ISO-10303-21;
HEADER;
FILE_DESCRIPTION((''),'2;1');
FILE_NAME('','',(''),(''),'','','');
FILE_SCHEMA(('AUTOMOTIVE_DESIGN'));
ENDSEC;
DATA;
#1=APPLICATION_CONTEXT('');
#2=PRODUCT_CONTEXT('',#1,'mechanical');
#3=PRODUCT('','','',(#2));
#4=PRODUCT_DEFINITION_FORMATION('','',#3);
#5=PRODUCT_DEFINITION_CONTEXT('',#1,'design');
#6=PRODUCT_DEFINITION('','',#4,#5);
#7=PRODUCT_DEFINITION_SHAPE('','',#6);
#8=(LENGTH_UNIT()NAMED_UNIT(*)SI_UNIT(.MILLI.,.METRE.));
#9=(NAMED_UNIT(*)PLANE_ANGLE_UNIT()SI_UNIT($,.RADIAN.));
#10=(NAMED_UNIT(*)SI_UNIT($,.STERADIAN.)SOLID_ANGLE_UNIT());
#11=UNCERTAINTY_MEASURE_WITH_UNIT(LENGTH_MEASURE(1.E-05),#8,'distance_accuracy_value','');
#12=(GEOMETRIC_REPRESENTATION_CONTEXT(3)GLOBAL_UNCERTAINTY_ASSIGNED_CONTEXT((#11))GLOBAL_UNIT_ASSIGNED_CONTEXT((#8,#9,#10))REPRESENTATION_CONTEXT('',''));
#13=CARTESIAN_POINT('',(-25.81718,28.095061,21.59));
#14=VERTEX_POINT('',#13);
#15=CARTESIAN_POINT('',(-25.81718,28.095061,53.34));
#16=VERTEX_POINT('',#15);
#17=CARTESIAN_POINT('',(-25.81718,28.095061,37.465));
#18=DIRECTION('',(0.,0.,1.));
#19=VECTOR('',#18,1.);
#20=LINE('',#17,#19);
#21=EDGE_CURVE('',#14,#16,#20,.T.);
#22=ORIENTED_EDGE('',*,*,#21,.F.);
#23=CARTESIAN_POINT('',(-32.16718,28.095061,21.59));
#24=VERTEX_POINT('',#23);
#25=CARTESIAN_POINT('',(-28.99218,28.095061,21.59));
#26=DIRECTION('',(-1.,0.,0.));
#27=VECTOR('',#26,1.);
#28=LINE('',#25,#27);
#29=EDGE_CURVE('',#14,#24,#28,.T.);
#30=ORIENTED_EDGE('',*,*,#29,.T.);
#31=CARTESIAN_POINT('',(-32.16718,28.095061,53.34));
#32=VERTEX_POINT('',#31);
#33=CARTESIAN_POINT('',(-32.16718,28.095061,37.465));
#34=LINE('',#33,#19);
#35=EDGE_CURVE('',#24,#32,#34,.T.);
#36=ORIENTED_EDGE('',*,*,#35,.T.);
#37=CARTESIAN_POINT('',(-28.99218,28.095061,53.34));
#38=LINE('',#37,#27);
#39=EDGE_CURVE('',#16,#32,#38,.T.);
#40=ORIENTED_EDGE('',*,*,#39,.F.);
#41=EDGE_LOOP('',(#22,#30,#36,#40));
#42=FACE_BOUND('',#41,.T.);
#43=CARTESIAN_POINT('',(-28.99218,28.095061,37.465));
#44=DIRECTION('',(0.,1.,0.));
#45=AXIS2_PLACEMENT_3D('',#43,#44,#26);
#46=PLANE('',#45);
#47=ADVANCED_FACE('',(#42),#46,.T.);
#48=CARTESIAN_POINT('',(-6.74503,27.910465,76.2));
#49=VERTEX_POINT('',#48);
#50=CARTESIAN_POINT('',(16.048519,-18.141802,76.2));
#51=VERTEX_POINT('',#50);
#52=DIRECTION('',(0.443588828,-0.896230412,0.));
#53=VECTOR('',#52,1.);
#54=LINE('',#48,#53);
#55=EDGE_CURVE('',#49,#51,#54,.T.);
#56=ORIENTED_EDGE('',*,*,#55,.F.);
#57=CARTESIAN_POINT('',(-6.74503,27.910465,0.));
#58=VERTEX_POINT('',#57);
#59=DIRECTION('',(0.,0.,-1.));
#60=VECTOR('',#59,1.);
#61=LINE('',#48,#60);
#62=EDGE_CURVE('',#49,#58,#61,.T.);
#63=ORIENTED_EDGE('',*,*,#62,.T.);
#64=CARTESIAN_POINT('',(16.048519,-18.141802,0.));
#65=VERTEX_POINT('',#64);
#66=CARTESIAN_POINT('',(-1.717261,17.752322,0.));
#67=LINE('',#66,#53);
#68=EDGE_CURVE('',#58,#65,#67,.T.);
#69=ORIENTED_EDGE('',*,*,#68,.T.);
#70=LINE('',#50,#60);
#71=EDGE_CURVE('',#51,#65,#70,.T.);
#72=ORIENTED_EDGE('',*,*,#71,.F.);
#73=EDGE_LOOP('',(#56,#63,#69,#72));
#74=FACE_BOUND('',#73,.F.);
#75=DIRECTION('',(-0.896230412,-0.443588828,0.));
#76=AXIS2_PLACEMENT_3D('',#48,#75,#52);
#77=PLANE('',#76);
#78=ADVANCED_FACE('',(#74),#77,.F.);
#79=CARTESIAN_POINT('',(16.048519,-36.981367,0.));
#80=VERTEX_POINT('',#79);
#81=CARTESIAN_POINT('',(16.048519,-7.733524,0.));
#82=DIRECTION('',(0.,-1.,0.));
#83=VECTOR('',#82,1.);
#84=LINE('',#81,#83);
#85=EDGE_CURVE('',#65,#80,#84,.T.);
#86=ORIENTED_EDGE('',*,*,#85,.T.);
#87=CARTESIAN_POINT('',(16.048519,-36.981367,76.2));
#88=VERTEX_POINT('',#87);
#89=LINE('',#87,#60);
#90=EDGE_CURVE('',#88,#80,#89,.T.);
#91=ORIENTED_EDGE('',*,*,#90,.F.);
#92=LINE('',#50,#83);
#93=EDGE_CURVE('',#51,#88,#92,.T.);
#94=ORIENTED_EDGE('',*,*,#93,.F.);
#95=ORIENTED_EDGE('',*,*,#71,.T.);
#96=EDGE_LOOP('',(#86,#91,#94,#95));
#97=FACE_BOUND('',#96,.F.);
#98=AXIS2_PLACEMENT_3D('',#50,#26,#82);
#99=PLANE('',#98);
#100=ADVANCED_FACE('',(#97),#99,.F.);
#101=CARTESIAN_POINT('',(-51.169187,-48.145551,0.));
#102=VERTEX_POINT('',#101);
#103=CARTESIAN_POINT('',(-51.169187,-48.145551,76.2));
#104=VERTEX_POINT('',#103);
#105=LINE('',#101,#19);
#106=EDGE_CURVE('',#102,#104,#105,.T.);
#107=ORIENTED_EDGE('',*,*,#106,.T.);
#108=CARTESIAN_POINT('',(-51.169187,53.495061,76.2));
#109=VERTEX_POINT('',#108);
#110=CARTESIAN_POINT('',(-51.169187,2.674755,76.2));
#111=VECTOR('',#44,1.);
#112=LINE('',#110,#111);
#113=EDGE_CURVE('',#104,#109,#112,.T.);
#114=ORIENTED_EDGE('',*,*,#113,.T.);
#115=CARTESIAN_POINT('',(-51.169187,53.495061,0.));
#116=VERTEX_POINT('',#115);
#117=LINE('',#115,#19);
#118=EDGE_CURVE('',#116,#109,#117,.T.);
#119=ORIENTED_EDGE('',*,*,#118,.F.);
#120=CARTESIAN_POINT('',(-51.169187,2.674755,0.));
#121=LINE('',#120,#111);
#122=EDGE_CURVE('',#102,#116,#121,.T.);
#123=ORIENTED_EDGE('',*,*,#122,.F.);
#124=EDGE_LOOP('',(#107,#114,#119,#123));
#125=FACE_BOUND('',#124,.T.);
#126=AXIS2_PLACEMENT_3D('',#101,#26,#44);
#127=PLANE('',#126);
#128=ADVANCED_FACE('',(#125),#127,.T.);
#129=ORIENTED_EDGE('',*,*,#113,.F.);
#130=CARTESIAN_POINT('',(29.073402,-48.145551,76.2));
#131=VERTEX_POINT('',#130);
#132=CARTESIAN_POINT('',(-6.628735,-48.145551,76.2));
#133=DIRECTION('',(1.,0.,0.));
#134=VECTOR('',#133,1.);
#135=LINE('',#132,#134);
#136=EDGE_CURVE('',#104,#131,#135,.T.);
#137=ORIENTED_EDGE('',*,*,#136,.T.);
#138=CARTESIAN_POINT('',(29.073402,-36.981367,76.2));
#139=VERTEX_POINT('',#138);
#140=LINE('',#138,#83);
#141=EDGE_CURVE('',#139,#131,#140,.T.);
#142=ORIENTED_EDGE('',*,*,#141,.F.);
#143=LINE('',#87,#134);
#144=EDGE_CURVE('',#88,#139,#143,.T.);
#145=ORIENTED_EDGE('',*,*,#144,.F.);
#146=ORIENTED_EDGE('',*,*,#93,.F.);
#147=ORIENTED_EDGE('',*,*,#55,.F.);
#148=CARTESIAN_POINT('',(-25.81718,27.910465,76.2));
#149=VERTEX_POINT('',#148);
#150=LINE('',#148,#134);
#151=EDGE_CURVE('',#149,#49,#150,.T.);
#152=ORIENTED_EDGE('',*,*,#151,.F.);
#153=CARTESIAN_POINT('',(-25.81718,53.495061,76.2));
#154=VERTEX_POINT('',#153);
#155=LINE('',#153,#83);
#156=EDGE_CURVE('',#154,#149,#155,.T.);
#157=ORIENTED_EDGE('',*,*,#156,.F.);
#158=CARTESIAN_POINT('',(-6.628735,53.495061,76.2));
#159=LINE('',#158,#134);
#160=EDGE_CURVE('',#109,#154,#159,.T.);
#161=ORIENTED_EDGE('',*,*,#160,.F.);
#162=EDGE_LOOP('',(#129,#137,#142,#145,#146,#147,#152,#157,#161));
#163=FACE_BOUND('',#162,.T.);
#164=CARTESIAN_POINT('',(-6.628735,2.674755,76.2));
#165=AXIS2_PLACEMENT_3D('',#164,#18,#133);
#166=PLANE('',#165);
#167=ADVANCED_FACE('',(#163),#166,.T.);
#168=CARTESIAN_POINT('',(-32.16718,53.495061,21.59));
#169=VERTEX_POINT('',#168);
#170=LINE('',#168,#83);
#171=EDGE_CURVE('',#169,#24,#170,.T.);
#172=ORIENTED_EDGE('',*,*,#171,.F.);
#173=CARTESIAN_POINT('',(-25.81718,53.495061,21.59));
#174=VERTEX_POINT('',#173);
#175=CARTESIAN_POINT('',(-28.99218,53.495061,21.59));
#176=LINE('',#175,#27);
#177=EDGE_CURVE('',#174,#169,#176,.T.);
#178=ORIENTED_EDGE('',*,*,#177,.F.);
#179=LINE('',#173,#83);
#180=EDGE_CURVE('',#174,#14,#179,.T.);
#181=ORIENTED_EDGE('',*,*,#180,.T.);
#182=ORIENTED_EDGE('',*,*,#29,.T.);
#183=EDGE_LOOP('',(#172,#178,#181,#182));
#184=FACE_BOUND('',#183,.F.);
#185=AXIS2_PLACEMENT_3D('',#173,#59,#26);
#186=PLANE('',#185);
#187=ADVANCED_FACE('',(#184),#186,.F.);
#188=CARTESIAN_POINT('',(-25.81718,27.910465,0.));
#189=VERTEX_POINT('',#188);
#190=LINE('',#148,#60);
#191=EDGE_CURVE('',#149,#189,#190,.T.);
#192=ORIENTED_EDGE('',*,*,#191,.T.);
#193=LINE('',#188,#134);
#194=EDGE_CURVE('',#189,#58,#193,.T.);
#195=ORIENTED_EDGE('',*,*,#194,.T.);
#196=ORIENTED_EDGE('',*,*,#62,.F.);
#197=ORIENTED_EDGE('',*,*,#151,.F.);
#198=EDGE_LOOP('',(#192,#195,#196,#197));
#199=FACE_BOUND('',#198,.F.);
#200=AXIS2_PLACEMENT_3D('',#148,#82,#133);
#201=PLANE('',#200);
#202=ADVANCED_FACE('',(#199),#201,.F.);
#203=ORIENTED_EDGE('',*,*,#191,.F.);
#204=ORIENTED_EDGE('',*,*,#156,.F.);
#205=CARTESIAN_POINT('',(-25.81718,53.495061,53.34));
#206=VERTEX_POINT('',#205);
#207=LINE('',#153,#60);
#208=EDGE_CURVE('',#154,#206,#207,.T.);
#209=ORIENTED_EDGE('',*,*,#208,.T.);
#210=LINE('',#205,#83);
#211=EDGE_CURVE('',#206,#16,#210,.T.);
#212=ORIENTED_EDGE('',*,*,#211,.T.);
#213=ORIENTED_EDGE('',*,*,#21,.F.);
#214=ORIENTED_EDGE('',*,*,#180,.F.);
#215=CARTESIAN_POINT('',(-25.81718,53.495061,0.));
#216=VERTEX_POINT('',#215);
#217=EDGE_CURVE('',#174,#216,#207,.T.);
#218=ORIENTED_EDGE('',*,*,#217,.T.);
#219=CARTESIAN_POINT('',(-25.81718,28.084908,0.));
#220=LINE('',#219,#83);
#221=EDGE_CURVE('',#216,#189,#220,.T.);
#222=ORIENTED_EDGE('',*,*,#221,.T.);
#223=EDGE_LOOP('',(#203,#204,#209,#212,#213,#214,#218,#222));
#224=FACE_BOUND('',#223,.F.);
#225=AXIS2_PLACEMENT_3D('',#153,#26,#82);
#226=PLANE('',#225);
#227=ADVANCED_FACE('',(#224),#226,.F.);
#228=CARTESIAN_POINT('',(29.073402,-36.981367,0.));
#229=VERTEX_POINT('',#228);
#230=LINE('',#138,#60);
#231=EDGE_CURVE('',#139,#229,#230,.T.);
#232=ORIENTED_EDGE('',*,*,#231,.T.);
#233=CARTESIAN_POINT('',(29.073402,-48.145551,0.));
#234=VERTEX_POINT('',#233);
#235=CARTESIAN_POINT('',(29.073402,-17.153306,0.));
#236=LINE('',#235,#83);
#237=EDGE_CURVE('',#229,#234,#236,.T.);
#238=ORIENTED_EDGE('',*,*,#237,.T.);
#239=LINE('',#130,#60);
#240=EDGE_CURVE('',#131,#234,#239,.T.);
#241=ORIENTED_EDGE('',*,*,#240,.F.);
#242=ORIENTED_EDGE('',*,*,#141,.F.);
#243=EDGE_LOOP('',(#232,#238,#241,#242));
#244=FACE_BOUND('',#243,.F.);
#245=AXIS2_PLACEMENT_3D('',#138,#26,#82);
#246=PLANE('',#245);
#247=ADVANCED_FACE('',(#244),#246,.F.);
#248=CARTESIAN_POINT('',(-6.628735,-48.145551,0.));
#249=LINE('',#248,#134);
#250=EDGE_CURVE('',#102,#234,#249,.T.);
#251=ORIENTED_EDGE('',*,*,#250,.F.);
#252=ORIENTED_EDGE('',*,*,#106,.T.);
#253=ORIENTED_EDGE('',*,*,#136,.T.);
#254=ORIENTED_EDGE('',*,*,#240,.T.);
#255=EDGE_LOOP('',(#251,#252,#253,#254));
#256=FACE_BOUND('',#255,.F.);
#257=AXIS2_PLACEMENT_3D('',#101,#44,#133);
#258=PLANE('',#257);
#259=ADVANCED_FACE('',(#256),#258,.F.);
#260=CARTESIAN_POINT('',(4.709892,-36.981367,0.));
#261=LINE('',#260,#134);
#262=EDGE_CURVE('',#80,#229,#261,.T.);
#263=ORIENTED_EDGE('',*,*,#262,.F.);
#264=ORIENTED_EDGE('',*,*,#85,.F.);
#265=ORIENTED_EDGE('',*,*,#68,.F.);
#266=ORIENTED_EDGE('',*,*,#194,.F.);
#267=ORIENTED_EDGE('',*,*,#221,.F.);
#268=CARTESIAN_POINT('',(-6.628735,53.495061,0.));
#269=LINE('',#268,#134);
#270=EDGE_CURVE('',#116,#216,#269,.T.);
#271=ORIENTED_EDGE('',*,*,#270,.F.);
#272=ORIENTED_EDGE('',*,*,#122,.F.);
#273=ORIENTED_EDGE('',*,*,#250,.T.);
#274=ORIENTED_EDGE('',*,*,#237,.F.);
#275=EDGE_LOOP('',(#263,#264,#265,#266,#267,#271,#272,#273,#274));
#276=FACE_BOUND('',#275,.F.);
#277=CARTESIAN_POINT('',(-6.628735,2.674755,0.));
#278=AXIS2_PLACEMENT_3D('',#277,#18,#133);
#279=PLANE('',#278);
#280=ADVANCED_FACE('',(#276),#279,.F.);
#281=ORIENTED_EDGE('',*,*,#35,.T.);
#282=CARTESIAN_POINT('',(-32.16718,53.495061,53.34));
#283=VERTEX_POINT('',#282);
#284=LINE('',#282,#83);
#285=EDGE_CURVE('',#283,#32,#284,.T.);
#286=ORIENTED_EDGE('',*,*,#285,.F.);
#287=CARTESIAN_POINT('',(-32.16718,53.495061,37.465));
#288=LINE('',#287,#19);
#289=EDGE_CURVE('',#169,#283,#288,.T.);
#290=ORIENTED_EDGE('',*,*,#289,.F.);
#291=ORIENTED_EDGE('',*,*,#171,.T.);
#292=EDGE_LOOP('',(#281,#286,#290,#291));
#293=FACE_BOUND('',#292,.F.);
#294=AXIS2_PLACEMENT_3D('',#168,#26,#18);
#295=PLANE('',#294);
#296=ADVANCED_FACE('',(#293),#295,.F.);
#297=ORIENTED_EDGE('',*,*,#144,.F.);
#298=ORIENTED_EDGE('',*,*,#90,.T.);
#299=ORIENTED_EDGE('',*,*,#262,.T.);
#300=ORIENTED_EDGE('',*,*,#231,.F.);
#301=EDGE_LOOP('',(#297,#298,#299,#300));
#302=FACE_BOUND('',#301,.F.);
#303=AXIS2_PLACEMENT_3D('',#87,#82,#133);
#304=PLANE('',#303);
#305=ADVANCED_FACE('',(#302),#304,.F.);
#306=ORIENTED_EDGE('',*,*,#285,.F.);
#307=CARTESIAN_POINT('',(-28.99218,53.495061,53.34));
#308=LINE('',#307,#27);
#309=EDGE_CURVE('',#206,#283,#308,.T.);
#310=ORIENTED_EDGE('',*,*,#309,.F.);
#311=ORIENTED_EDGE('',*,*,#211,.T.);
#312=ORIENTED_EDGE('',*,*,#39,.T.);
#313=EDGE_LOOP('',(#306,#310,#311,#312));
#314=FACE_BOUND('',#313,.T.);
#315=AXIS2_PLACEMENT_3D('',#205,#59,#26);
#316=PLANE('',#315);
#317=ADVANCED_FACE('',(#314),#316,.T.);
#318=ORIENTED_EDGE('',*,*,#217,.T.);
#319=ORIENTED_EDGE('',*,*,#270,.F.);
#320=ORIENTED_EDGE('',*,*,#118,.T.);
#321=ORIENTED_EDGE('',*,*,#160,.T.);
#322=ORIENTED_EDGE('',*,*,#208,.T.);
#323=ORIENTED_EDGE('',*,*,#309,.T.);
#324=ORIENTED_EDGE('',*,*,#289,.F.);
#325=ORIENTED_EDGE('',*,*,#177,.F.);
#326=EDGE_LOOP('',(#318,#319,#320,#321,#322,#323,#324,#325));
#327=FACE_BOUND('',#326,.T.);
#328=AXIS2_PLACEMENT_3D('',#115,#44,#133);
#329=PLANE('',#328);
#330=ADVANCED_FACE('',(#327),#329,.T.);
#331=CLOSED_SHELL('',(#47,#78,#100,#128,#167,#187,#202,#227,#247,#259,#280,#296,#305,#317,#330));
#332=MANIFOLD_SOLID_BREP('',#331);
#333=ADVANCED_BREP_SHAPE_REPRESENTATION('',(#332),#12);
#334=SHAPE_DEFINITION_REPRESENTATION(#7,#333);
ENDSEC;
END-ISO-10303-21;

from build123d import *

# Parameters (mm, degrees)
F0_W      = 89.0809036791
F0_H      = 101.640611887
F1_DEPTH  = 76.2
F3_DEPTH  = 76.201
F4_R      = 10.6888946351
F3_FACE_W = 51.3844064591
F3_FACE_H = 76.2
F5_DEPTH  = 12.7
F8_W      = 6.35
F8_H      = 31.75
F9_DEPTH  = 25.4


# Not quite as in the source:
# - a feature of the source that left no trace in its solid (it failed there, or was rolled back) is left out


with BuildPart() as f1:
    # F0 (on Top) → F1 (new body)
    with BuildSketch(Plane.XY):
        with Locations((-6.628734991, 2.674754709)):
            Rectangle(F0_W, F0_H)
    extrude(amount=F1_DEPTH)

    # F2 (on face) → F3 (cut, through all)
    with BuildSketch(Plane.XY.offset(76.2)):
        Polygon((37.9117168486, 53.4950606525), (-25.8171800524, 53.4950606525), (-25.8171800524, 27.9104653746), (-6.7450297065, 27.9104653746), (16.0485189408, -18.1418024004), (16.0485189408, -36.9813665748), (29.0734022856, -36.9813665748), (29.0734022856, -48.1455512345), (31.1666838825, -48.1455512345), (37.9117168486, -48.1455512345), align=None)
    extrude(amount=-F3_DEPTH, mode=Mode.SUBTRACT)

    # F4 (on Right) + F3_face (on face) → F5 (join)
    with BuildSketch(Plane.YZ):
        with Locations((0, 59.542324394)):
            Circle(F4_R)
    with BuildSketch(Plane(origin=(4.6517446171, 4.8843314871, 38.1), x_dir=(-0.4435888282, 0.8962304121, 0), z_dir=(0.8962304121, 0.4435888282, 0))):
        Rectangle(F3_FACE_W, F3_FACE_H)
    extrude(amount=-F5_DEPTH, dir=(1, 0, 0))

    # F8 (on face) → F9 (cut)
    with BuildSketch(Plane(origin=(0, 53.4950606525, 0), x_dir=(-1, 0, 0), z_dir=(0, 1, 0))):
        with Locations((28.9921800524, 37.465)):
            Rectangle(F8_W, F8_H)
    extrude(amount=-F9_DEPTH, mode=Mode.SUBTRACT)


solid = f1.part
